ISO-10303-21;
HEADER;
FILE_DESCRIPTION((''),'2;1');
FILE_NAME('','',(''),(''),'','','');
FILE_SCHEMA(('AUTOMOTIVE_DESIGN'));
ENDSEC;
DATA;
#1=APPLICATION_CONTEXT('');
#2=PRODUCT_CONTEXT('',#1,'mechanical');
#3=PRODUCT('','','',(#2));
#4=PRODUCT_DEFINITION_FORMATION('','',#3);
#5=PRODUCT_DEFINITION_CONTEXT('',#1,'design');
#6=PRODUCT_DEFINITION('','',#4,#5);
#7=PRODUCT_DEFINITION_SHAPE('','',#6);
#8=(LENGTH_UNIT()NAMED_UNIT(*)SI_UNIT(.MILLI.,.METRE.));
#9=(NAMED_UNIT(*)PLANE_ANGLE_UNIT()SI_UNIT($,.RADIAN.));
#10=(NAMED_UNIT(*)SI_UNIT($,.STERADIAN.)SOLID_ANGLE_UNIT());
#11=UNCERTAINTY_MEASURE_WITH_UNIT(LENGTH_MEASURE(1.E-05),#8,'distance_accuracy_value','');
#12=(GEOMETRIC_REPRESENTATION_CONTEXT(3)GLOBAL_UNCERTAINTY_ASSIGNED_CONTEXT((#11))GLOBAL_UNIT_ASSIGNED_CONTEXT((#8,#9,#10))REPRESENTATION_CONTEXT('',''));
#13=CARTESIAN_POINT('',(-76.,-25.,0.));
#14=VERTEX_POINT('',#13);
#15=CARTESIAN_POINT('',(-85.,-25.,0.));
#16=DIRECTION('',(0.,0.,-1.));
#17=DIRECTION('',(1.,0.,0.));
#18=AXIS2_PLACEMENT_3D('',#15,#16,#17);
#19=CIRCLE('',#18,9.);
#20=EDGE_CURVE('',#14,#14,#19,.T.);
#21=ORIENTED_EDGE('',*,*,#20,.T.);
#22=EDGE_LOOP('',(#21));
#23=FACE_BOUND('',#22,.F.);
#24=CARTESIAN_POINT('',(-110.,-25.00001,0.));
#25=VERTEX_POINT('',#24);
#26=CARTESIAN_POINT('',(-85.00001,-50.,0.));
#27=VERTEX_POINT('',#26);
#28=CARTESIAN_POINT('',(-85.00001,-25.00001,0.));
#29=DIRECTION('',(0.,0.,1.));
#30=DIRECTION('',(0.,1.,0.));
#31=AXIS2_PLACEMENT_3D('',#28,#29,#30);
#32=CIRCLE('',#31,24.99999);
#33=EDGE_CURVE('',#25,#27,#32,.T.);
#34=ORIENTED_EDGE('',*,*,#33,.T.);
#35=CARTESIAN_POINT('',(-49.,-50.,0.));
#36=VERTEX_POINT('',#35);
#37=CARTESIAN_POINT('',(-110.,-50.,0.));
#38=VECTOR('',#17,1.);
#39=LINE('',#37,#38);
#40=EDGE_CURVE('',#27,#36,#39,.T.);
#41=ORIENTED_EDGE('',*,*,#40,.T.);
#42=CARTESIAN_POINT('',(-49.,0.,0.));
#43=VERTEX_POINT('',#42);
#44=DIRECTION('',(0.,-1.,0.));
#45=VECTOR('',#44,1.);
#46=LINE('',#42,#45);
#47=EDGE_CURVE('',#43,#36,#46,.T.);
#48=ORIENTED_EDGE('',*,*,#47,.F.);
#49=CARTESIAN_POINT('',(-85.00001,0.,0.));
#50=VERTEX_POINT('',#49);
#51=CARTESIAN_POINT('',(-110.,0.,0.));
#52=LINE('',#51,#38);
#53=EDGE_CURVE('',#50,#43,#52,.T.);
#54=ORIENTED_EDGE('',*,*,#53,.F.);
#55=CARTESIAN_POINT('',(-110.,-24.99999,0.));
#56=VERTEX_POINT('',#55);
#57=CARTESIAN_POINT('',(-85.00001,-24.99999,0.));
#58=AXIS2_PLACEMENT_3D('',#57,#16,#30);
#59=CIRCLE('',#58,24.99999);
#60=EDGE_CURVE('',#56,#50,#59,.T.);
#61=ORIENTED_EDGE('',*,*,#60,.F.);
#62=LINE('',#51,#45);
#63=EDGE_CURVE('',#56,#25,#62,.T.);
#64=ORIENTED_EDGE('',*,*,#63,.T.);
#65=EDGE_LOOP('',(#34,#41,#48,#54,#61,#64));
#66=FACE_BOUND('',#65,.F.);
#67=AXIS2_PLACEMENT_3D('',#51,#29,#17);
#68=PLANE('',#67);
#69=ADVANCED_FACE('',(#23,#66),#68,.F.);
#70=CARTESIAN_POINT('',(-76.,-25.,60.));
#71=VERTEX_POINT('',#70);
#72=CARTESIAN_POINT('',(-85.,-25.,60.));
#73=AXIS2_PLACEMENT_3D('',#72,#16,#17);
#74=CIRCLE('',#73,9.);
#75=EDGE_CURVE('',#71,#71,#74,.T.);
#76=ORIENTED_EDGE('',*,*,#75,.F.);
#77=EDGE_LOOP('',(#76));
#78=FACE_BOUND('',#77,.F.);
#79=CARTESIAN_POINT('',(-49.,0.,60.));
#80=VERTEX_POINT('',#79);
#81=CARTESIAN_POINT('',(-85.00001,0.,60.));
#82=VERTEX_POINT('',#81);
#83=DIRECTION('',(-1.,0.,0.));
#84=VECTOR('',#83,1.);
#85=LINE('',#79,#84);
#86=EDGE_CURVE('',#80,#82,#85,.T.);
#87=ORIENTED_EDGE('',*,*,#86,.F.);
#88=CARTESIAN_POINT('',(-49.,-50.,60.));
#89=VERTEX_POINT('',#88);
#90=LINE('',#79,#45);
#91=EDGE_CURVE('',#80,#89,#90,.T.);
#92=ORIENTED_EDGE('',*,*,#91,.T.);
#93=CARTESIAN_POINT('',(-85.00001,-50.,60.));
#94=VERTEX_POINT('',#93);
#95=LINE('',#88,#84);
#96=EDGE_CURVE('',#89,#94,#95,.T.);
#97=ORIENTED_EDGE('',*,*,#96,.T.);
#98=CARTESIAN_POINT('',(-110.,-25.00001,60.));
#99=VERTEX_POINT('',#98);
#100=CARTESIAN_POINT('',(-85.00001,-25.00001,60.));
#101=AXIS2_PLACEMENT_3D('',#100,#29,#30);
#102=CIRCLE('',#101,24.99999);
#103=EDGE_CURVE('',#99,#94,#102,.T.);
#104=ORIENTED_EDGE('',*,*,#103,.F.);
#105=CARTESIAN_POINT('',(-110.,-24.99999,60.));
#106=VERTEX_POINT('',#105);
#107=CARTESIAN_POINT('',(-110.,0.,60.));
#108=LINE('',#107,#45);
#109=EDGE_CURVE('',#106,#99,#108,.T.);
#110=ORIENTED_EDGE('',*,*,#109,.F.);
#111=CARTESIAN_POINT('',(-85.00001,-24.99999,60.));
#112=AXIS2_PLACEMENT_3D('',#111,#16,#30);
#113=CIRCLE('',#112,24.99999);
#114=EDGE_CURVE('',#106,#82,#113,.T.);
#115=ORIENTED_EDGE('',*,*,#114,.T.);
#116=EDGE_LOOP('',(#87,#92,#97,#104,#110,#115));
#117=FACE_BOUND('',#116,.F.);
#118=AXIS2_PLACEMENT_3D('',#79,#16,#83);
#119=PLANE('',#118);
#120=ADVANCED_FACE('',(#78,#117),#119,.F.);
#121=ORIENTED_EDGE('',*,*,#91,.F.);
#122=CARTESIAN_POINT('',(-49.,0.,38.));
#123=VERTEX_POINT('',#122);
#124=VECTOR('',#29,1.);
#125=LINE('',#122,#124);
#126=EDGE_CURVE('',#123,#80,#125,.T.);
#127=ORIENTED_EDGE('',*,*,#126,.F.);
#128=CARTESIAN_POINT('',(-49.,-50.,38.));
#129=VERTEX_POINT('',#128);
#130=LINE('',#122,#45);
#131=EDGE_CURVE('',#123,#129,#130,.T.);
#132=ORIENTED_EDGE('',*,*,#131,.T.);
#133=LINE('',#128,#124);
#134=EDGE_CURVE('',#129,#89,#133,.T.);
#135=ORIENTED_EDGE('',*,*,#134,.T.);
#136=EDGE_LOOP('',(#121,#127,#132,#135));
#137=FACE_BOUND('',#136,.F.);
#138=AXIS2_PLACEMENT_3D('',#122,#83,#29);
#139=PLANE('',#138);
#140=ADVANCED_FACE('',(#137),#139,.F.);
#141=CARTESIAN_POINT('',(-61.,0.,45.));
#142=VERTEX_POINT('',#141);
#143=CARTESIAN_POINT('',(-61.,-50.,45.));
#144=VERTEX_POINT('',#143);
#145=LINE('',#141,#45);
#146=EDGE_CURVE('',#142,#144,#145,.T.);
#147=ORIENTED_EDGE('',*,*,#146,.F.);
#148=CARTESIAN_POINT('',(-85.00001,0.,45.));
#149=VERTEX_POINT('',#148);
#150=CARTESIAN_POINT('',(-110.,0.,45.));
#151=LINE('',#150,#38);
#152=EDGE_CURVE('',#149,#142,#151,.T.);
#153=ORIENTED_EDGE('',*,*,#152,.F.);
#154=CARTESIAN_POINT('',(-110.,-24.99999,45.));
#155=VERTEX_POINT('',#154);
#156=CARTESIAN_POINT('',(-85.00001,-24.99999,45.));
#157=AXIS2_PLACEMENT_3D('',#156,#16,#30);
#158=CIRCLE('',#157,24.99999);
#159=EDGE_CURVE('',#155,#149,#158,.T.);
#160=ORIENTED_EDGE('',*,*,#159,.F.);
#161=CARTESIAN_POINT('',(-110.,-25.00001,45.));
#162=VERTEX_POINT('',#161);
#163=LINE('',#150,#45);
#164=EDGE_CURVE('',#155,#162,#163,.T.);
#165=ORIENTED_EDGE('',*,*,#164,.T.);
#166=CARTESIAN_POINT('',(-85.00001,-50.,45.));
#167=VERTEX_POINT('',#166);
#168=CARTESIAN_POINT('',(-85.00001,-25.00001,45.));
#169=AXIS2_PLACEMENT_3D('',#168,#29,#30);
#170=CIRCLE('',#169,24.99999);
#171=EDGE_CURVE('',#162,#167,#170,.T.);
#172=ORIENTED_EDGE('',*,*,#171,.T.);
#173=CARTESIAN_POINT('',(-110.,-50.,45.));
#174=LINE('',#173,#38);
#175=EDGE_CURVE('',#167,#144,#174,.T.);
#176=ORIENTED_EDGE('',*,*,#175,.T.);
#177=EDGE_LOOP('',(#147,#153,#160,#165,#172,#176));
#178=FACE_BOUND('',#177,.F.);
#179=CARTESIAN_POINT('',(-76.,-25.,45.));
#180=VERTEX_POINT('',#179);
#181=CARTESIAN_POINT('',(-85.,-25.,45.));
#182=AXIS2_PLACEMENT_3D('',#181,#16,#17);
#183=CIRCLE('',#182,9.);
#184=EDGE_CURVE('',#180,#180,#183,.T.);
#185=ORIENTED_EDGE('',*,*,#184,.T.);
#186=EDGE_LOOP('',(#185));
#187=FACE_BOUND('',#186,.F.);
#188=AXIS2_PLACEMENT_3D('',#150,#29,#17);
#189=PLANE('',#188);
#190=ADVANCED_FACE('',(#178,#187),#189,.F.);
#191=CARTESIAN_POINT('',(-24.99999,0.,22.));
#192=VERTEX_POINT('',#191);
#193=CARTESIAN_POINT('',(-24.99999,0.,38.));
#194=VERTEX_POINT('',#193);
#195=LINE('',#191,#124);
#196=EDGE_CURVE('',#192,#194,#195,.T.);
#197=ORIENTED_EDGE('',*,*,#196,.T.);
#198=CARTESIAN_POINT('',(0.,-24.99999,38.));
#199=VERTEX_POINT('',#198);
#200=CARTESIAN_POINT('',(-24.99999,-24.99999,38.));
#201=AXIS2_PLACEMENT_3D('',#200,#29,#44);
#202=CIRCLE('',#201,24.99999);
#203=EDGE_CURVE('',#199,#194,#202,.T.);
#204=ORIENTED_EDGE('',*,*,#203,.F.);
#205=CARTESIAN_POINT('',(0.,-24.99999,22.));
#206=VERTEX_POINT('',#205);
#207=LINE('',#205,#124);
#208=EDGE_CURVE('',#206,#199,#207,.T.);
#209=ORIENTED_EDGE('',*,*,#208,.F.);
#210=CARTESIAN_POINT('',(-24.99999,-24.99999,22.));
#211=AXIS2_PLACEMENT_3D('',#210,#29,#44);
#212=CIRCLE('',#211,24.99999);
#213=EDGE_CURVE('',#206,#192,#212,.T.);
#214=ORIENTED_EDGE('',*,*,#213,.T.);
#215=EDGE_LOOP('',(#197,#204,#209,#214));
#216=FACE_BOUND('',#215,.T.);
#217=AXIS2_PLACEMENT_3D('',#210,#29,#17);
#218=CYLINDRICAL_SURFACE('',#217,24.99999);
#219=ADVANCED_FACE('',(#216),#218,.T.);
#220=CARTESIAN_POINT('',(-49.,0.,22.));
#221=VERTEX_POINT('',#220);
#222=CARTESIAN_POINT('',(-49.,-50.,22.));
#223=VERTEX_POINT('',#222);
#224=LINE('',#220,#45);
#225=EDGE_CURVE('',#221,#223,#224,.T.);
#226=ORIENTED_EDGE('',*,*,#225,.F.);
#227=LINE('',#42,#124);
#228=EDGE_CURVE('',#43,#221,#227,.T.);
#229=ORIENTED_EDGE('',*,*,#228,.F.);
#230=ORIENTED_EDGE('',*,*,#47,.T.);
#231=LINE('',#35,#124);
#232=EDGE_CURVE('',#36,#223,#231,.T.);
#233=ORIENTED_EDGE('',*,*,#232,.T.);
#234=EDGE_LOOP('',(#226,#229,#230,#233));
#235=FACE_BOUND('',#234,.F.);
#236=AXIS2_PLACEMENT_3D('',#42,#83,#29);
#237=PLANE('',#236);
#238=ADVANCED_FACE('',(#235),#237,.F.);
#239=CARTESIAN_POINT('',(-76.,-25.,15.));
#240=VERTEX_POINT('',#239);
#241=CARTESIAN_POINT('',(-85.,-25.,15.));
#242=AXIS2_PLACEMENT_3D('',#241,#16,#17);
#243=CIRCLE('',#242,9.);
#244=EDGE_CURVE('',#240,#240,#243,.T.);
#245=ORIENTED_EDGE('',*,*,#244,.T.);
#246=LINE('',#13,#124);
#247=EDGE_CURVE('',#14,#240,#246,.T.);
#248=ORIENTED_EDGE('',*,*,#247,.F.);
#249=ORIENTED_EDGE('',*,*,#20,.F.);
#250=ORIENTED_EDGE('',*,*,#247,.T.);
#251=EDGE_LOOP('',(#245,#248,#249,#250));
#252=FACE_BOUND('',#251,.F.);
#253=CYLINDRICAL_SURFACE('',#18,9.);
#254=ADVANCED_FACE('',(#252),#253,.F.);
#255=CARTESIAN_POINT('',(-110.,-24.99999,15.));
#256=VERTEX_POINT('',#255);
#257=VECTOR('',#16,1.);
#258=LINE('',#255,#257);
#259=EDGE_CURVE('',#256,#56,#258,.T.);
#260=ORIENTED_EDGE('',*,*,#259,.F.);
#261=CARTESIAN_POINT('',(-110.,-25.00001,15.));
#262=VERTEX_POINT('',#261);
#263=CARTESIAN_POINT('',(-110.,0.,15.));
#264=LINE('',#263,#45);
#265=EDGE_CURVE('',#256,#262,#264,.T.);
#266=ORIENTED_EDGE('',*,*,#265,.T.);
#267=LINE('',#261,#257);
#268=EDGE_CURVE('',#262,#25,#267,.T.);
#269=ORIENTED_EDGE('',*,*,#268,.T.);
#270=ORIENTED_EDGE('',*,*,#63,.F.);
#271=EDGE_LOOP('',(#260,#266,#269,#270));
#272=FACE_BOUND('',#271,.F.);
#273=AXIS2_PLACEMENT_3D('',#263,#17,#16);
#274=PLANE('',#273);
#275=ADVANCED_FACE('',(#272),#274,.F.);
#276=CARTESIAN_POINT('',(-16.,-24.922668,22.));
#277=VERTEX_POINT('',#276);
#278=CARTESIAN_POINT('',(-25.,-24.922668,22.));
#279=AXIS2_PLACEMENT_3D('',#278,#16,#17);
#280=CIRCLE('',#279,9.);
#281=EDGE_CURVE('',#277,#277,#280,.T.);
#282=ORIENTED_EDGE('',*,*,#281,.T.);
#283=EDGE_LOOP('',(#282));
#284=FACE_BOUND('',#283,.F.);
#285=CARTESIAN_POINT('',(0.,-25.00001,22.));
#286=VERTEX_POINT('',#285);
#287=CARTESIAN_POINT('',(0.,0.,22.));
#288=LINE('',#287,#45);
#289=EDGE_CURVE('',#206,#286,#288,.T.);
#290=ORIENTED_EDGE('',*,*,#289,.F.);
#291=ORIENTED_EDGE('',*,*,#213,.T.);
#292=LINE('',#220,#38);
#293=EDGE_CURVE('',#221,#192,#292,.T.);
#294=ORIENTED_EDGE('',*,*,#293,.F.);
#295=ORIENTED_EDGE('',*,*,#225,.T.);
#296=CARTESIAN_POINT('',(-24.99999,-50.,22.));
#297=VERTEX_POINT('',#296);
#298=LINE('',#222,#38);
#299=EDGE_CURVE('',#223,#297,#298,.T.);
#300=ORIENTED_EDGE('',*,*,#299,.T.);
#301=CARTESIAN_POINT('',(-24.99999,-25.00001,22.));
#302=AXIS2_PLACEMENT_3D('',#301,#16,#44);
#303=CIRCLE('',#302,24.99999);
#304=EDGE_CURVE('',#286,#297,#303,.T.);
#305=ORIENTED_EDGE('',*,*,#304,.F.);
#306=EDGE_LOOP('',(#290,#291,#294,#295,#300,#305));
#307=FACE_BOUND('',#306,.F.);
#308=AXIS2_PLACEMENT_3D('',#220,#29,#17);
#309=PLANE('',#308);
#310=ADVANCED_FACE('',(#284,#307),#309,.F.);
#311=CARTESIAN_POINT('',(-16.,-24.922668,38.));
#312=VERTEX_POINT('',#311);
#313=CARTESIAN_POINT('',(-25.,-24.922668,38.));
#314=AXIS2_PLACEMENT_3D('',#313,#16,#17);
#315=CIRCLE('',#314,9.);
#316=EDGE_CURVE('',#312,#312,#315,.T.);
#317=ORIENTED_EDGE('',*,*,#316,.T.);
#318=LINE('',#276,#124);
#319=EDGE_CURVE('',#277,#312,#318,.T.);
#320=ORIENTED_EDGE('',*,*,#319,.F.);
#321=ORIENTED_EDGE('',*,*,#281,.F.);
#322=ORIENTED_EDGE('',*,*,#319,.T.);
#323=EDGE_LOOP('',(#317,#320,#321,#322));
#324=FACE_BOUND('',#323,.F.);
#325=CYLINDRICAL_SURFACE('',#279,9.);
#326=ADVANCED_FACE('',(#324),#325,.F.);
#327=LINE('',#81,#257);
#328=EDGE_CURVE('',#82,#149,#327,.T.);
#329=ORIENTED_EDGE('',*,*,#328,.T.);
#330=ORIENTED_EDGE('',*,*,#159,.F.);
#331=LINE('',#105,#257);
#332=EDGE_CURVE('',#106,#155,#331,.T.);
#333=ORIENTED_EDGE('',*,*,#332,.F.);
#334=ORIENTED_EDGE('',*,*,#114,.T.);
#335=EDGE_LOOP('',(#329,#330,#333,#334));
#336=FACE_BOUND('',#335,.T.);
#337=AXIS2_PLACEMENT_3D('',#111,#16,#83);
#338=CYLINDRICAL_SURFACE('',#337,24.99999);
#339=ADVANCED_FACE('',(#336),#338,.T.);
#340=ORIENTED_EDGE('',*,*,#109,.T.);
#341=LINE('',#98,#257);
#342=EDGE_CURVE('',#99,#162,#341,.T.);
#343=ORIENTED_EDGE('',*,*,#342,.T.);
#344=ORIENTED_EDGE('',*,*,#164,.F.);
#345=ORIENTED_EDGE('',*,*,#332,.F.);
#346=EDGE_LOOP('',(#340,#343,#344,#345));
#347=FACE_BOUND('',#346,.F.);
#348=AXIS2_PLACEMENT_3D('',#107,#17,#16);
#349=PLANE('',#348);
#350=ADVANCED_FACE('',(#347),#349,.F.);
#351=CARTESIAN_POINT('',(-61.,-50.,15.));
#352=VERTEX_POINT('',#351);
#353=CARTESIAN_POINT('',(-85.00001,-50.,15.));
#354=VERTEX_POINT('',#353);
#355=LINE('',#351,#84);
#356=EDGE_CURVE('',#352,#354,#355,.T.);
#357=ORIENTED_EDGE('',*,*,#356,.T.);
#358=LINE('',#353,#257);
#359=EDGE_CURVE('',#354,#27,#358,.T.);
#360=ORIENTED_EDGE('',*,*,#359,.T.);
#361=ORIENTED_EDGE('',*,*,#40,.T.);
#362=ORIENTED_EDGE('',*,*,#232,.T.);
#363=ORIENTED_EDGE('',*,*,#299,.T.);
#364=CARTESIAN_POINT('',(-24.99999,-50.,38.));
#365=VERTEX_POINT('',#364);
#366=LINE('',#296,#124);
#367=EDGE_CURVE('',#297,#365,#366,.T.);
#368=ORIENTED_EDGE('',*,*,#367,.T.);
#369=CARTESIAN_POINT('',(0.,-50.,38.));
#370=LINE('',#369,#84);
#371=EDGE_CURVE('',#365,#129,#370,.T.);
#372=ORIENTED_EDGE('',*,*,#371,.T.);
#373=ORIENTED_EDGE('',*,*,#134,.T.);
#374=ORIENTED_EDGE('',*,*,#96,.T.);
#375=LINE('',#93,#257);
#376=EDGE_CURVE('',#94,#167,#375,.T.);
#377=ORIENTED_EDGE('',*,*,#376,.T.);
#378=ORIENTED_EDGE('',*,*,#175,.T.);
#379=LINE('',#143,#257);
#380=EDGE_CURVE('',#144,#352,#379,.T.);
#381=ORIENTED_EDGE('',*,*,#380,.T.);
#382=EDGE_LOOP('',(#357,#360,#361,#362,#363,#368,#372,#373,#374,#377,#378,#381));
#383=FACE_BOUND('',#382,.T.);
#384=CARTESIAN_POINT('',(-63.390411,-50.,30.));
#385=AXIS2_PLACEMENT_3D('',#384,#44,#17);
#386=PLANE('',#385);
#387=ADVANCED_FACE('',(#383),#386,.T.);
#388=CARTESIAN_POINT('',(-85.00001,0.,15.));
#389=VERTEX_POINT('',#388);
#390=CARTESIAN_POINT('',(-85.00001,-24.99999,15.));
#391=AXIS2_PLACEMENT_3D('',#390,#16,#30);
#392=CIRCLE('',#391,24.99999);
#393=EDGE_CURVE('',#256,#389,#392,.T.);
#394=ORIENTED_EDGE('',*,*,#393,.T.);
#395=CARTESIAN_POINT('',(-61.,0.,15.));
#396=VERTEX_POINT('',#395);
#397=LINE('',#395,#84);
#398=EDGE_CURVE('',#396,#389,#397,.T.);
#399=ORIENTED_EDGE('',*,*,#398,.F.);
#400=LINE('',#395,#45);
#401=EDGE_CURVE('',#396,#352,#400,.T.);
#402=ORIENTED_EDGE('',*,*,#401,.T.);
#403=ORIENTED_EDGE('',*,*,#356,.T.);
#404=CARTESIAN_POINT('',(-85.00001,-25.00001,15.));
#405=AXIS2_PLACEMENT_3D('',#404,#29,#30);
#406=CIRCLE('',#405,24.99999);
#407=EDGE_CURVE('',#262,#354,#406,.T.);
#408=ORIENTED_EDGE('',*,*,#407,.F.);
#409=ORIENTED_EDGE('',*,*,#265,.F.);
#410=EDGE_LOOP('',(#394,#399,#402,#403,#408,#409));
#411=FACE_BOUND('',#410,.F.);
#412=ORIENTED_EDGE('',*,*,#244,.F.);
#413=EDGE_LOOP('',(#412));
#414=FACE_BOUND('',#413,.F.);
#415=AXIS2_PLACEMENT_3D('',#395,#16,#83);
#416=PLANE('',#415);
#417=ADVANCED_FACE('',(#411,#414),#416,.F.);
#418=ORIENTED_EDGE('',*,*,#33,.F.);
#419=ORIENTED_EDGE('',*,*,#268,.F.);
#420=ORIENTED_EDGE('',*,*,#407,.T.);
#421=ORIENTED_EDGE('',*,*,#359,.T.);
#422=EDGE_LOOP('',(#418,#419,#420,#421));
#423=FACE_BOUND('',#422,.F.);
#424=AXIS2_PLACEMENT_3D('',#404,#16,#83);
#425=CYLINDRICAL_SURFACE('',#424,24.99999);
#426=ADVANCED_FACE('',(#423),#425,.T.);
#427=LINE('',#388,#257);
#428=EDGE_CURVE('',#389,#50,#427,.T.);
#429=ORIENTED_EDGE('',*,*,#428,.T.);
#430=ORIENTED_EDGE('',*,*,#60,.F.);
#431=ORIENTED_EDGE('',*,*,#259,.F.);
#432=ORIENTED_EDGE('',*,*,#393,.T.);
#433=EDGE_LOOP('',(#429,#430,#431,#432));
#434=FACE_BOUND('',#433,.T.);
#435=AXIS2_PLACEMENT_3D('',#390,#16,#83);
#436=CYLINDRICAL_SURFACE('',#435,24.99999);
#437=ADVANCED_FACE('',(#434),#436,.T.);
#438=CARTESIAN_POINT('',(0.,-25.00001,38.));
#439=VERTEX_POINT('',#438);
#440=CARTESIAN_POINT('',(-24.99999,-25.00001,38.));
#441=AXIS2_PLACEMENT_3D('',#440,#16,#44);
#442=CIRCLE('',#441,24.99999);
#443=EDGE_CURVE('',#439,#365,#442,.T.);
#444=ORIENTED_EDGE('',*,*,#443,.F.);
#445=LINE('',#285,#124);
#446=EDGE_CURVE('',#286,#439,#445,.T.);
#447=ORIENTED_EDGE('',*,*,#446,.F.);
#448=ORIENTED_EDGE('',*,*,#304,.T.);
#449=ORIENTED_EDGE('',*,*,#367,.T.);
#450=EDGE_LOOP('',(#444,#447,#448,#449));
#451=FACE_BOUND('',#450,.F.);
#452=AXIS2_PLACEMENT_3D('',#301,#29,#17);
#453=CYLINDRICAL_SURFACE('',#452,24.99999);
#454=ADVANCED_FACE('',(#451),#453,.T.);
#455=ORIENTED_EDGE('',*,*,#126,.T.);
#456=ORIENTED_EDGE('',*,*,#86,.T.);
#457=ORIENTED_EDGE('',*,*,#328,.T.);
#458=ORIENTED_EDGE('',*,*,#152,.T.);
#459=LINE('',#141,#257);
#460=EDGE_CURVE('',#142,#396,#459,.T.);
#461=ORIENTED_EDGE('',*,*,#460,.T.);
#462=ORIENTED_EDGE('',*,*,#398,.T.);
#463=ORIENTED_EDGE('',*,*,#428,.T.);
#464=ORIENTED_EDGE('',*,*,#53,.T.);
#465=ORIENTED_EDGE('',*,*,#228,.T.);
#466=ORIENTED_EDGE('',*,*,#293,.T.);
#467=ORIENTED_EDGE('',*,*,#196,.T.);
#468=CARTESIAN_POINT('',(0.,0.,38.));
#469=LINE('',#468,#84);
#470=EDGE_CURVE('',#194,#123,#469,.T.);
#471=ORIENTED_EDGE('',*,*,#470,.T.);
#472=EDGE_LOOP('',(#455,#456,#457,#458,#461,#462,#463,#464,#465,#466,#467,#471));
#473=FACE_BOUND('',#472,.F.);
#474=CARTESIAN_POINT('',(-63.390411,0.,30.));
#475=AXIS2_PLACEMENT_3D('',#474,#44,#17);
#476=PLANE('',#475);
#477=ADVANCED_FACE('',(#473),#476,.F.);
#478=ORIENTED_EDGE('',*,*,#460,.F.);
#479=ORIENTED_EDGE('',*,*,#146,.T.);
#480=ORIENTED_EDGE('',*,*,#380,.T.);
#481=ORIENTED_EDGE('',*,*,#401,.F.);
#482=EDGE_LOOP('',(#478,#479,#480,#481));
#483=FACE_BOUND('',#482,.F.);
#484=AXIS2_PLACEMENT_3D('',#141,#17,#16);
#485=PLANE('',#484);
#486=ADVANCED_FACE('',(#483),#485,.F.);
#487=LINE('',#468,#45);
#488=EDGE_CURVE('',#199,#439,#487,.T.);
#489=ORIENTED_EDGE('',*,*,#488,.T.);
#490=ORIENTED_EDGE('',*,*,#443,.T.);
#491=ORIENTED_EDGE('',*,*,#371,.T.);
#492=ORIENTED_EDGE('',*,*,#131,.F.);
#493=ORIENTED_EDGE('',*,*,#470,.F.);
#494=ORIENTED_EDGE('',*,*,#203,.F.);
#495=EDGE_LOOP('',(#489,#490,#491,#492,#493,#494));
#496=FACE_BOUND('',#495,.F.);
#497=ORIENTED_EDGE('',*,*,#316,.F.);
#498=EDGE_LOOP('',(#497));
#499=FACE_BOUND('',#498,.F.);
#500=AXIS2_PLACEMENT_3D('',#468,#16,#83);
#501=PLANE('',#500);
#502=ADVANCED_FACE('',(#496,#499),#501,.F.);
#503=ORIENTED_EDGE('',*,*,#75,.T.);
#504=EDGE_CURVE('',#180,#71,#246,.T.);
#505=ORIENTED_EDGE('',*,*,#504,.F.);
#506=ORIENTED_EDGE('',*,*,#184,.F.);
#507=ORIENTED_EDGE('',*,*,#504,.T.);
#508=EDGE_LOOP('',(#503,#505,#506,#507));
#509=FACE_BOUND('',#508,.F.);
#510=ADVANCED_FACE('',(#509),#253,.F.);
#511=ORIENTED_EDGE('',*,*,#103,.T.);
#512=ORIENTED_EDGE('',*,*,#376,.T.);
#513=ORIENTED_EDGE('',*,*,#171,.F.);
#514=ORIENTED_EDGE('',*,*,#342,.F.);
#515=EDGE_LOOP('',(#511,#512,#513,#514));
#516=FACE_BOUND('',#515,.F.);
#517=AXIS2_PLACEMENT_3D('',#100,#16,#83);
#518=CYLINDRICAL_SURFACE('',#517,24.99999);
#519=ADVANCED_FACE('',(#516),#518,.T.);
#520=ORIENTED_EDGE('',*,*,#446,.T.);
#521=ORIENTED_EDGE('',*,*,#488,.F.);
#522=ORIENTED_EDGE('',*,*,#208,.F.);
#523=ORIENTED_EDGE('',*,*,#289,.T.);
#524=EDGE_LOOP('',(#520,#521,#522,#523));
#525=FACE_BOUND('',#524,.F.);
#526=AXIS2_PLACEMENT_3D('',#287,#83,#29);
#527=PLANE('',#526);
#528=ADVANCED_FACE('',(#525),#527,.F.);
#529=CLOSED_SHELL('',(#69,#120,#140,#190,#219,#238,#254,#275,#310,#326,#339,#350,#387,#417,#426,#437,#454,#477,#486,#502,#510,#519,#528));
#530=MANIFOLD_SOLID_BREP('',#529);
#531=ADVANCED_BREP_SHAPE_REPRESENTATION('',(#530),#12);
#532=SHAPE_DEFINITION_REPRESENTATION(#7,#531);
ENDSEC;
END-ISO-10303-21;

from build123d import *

# Parameters (mm, degrees)
F1_DEPTH = 50
F2_R     = 24.99999
F3_R     = 9
F5_DEPTH = 60.001
F6_R     = 9
F7_DEPTH = 25.4


# Not quite as in the source:
# - a fillet or chamfer is up to 0.001 mm smaller than in the source, because OpenCascade refuses the exact size


with BuildPart() as f1:
    # F0 (on Front) → F1 (new body)
    with BuildSketch(Plane.XZ):
        Polygon((-110, 0), (-49, 0), (-49, 22), (0, 22), (0, 38), (-49, 38), (-49, 60), (-110, 60), (-110, 45), (-61, 45), (-61, 15), (-110, 15), align=None)
    extrude(amount=F1_DEPTH)

    # F2 (radius 25 in the source; OpenCascade refuses exactly that, so slightly less here)
    f2_edges = [f1.edges().sort_by_distance(p)[0] for p in [
        (-110, -50, 52.5),
        (-110, -50, 7.5),
        (-110, 0, 52.5),
        (-110, 0, 7.5),
        (0, -50, 30),
        (0, 0, 30),
    ]]
    fillet(f2_edges, radius=F2_R)

    # F3 (on face) → F5 (cut, through all)
    with BuildSketch(Plane(origin=(0, 0, 0), x_dir=(1, 0, 0), z_dir=(0, 0, -1))):
        with Locations((-85, 25)):
            Circle(F3_R)
    extrude(amount=-F5_DEPTH, mode=Mode.SUBTRACT)

    # F6 (on face) → F7 (cut)
    with BuildSketch(Plane(origin=(0, 0, 22), x_dir=(1, 0, 0), z_dir=(0, 0, -1))):
        with Locations((-25, 24.9226680556)):
            Circle(F6_R)
    extrude(amount=-F7_DEPTH, mode=Mode.SUBTRACT)


solid = f1.part
